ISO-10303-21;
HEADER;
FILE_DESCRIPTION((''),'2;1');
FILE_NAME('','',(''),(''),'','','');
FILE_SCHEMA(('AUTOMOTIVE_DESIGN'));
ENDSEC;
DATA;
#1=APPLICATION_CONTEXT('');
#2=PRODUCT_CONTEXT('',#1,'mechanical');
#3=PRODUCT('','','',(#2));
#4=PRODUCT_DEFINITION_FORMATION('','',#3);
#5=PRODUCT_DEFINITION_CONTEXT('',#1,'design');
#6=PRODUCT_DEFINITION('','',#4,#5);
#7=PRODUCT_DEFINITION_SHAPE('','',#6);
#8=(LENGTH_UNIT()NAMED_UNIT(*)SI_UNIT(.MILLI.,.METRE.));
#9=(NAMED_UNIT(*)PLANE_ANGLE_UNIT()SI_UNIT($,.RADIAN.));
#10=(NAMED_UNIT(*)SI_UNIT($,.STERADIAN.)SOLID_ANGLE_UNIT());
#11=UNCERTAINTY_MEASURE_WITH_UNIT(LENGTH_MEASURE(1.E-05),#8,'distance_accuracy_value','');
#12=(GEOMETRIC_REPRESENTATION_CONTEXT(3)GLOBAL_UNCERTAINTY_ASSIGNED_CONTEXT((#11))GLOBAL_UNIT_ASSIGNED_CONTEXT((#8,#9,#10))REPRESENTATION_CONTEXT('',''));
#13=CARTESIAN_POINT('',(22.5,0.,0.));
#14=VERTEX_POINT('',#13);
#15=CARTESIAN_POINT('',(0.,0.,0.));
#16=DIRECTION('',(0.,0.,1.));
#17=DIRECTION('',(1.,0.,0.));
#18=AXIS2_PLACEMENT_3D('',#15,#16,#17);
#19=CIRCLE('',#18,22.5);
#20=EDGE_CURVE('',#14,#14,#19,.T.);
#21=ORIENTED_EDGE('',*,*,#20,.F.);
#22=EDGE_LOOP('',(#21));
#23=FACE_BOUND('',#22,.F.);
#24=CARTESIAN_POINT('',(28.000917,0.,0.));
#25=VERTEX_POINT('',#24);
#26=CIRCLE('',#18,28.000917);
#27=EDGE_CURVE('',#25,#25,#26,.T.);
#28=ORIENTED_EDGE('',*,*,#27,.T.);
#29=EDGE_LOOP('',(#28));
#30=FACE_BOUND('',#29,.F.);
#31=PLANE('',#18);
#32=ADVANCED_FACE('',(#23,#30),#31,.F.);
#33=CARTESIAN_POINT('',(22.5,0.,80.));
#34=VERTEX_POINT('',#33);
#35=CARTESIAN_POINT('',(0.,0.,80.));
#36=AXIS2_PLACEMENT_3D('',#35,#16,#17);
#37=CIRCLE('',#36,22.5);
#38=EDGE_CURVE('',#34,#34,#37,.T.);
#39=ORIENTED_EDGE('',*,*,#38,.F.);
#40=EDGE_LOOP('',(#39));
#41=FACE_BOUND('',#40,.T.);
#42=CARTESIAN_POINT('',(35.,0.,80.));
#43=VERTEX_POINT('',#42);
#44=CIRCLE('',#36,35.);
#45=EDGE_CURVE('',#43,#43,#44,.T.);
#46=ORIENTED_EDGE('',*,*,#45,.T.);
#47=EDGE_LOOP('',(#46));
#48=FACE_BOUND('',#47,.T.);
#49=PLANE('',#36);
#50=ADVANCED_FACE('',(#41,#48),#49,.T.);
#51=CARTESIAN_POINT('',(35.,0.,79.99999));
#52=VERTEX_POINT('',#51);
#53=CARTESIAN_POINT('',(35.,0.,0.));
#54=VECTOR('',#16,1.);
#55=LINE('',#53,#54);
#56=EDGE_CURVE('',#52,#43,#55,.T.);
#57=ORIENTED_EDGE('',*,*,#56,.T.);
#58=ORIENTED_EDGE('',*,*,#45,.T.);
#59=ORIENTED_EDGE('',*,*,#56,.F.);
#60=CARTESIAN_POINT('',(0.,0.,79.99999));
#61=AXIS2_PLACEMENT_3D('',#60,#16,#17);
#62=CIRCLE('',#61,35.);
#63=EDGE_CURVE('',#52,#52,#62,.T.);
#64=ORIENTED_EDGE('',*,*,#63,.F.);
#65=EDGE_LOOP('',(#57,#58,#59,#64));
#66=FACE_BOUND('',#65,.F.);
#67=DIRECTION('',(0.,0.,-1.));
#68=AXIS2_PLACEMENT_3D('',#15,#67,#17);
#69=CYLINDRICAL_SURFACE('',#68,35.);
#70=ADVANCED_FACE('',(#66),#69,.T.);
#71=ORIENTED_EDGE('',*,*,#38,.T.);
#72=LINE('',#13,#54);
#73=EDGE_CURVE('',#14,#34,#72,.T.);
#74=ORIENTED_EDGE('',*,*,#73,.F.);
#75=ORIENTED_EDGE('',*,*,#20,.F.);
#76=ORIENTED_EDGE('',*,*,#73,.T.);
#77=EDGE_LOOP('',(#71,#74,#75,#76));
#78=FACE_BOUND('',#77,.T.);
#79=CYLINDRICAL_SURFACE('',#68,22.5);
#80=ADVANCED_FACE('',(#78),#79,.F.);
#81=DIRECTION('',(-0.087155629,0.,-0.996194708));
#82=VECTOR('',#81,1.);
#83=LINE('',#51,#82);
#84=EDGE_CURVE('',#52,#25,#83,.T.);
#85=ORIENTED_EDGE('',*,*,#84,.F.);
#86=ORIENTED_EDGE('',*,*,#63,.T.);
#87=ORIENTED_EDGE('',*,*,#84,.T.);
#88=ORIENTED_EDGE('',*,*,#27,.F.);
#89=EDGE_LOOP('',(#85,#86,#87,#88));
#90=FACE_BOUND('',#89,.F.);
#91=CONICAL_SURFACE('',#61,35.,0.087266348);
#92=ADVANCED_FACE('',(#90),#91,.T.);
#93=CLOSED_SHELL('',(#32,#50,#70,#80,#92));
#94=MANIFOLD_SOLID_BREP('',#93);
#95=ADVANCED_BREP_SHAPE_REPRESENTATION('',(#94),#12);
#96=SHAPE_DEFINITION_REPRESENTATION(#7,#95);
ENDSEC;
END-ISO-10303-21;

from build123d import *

# Parameters (mm, degrees)
F0_R     = 35
F0_R_2   = 22.5
F1_DEPTH = 80
F2_SIZE2 = 6.999083
F2_SIZE  = 79.99999


# Not quite as in the source:
# - a fillet or chamfer is up to 0.001 mm smaller than in the source, because OpenCascade refuses the exact size


with BuildPart() as f1:
    # F0 (on Top) → F1 (new body)
    with BuildSketch(Plane.XY):
        Circle(F0_R)
        Circle(F0_R_2, mode=Mode.SUBTRACT)
    extrude(amount=F1_DEPTH)

    # F2 (size 80 and 6.9990930821 in the source; OpenCascade refuses exactly that, so slightly less here)
    f2_edges = [f1.edges().sort_by_distance(p)[0] for p in [
        (-35, 0, 0),
    ]]
    f2_side = f1.faces().sort_by_distance((-35, 0, 40))[0]
    chamfer(f2_edges, length=F2_SIZE, length2=F2_SIZE2, reference=f2_side)


solid = f1.part
